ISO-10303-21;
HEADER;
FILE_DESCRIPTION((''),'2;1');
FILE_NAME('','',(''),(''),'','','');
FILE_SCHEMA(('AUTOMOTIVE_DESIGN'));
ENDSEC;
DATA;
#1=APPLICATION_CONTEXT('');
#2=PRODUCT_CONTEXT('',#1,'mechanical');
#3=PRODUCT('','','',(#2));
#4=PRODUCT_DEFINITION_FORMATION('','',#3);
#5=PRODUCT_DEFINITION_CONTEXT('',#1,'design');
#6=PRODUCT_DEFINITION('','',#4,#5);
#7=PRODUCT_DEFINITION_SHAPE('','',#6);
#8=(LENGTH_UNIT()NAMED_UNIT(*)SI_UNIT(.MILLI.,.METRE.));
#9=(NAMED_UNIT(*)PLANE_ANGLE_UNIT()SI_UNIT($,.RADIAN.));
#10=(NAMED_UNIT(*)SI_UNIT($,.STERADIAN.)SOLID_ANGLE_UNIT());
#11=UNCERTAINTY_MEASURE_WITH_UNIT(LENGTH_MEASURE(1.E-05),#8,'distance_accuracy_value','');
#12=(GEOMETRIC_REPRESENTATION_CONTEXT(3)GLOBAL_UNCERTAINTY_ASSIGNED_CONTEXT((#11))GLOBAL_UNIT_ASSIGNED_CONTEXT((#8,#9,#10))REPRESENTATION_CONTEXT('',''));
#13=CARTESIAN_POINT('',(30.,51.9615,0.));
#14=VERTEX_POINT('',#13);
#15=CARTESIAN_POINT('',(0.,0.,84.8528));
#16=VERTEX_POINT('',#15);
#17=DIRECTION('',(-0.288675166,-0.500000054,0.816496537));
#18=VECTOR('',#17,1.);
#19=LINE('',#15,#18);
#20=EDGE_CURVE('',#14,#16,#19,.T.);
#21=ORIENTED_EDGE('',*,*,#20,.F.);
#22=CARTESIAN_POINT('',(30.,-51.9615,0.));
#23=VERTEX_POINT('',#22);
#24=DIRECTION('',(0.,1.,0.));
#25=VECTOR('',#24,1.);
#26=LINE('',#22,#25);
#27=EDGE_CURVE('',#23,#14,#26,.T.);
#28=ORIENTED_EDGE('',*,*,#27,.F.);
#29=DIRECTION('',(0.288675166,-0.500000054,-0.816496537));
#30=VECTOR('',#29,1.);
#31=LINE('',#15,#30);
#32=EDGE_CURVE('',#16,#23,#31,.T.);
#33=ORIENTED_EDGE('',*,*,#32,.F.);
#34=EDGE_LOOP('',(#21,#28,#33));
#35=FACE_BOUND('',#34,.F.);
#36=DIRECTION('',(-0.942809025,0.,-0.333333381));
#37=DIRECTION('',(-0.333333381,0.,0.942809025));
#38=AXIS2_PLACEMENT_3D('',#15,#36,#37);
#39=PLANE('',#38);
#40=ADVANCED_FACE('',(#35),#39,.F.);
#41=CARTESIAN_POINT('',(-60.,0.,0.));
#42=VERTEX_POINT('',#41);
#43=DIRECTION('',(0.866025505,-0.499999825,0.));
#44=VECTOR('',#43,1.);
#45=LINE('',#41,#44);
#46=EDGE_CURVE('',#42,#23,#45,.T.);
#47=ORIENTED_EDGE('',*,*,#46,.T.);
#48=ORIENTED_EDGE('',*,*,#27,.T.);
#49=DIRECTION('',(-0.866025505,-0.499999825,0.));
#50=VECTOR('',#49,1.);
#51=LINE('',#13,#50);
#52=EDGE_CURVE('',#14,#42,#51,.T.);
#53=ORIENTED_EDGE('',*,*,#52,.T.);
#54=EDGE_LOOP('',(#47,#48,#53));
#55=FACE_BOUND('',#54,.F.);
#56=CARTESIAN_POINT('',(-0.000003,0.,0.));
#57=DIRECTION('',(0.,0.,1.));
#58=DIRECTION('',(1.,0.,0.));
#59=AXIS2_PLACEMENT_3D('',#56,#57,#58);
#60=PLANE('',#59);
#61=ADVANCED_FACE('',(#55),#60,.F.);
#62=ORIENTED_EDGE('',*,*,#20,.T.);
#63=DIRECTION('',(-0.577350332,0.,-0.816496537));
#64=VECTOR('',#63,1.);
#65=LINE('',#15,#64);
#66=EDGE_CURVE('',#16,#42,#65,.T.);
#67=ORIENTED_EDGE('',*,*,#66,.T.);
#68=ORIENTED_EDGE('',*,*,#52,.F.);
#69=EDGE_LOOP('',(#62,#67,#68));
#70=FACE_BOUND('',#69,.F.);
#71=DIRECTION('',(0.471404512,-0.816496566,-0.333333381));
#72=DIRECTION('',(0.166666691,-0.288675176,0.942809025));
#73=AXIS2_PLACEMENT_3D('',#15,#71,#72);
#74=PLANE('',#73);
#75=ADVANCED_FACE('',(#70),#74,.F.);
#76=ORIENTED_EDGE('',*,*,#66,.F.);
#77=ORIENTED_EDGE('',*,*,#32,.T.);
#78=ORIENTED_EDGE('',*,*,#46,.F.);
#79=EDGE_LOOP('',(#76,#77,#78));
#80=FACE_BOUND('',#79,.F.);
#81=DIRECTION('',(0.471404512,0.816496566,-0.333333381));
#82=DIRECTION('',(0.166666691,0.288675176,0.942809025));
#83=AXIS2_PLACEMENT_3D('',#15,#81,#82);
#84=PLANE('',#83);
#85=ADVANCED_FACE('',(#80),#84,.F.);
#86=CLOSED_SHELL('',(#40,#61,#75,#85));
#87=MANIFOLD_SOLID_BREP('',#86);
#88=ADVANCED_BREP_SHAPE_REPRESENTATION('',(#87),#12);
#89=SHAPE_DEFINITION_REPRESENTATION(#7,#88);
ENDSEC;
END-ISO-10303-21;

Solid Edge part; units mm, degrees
sketch "Sketch1" plane through (0, 0, 0) normal (0, 0, 1) x (1, 0, 0)
  line L0 (-60, 0) -> (30, -51.9615)
  line L1 (30, -51.9615) -> (30, 51.9615)
  line L2 (30, 51.9615) -> (-60, 0)
extrude "Protrusion1" add sketch "Sketch1" along normal up to vertex (84.8528 mm away)
sketch "Sketch2" plane through (0, 0, 0) normal (0, -1, 0) x (1, 0, 0)
  line L0 (0, 84.8528) -> (30, 0)
extrude "Cutout1" cut sketch "Sketch2" along normal mid plane 103.923 material side at (15.0471, 0, 42.4431)
pattern_circular "Pattern1" count 3 over 360 about axis through (0, 0, 0) along (0, 0, -1) of "Cutout1"
